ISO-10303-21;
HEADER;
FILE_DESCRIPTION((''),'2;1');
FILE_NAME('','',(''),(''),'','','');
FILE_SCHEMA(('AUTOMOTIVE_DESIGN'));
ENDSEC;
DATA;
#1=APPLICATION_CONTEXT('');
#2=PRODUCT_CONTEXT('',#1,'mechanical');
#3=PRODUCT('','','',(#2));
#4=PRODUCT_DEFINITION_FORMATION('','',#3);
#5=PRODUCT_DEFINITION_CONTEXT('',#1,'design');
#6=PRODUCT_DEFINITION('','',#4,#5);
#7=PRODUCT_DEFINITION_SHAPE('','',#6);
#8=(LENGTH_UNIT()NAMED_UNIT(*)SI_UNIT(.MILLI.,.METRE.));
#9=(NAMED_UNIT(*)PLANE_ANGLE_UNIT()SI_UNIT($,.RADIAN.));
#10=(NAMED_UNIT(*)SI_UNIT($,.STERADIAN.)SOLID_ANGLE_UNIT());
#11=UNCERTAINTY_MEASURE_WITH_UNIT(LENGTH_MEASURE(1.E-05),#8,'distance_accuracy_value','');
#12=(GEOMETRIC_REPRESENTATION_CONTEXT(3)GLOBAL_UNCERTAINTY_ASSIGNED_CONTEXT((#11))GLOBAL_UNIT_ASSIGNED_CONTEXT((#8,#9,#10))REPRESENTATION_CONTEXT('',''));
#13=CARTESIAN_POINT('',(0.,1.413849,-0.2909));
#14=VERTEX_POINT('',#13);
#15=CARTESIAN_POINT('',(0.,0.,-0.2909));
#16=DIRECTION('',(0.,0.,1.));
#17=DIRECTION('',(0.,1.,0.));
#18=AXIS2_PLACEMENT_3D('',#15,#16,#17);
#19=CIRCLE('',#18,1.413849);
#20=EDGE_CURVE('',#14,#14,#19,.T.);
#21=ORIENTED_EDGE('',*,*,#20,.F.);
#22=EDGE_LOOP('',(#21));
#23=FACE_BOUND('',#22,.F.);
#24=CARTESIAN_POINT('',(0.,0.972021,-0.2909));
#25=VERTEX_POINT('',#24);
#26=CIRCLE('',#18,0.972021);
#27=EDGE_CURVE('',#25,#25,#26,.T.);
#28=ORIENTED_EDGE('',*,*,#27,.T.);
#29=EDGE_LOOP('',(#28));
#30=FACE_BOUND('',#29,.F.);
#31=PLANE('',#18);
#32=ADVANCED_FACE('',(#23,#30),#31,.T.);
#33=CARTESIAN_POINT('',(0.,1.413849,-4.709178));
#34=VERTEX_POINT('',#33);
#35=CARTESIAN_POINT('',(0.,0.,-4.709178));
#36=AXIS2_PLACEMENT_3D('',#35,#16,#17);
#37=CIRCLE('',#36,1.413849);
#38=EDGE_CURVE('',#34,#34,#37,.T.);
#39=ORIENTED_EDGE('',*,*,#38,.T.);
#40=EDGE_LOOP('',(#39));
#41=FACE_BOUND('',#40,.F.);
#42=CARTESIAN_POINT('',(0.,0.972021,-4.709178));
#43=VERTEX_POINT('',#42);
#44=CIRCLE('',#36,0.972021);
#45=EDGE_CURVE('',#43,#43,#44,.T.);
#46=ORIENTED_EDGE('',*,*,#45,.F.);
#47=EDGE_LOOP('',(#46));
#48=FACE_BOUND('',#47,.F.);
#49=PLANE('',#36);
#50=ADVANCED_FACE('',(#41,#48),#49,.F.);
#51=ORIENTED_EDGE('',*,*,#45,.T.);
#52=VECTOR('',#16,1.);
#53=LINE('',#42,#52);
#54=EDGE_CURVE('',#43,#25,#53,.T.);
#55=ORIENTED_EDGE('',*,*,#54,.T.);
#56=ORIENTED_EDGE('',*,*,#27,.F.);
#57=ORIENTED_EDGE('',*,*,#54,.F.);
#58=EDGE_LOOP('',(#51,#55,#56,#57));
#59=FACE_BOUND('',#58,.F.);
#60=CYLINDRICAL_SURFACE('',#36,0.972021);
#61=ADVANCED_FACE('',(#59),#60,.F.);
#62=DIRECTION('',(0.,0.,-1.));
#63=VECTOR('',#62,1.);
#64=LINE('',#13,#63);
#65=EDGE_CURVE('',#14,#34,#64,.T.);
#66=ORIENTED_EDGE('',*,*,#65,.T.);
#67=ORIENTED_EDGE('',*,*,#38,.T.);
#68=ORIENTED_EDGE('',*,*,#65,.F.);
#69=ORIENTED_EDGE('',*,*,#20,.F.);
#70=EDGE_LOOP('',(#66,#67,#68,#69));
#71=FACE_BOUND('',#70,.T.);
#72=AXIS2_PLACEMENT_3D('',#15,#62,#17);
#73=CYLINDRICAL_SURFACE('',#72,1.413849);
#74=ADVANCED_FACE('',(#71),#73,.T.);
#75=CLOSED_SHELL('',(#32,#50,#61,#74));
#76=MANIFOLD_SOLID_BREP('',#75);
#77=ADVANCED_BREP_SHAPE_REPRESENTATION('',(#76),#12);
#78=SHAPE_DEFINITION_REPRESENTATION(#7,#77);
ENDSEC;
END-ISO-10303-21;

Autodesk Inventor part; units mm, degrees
ref_plane "YZ Plane" through (0, 0, 0) normal (1, 0, 0) x (0, 1, 0)
ref_plane "XZ Plane" through (0, 0, 0) normal (0, 1, 0) x (-1, 0, 0)
ref_plane "XY Plane" through (0, 0, 0) normal (0, 0, 1) x (1, 0, 0)
sketch "スケッチ1" plane through (0, 0, 0) normal (1, 0, 0) x (0, 1, 0)
  line L0 (1.1, 0) -> (1.6, 0)
  line L1 (1.6, 0) -> (1.6, -5)
  line L2 (1.6, -5) -> (1.1, -5)
  line L3 (1.1, -5) -> (1.1, 0)
  line L4 (0, -6) -> (0, 1) projected
  point P0 (0, 0)
  dimension "d0" = 1.1
  dimension "d1" = 1.6
  dimension "d2" = 5
revolve "回転1" add sketch "スケッチ1" angle 360 about axis through (0, 0, -10) along (0, 0, 1)
scale "尺度1" factors (0.8836555, 0.8836555, 0.8836555) then translate (0, 0, -0.2909) bodies 1
properties part number "MetalCollarPh3L5" material "ステンレス鋼"
